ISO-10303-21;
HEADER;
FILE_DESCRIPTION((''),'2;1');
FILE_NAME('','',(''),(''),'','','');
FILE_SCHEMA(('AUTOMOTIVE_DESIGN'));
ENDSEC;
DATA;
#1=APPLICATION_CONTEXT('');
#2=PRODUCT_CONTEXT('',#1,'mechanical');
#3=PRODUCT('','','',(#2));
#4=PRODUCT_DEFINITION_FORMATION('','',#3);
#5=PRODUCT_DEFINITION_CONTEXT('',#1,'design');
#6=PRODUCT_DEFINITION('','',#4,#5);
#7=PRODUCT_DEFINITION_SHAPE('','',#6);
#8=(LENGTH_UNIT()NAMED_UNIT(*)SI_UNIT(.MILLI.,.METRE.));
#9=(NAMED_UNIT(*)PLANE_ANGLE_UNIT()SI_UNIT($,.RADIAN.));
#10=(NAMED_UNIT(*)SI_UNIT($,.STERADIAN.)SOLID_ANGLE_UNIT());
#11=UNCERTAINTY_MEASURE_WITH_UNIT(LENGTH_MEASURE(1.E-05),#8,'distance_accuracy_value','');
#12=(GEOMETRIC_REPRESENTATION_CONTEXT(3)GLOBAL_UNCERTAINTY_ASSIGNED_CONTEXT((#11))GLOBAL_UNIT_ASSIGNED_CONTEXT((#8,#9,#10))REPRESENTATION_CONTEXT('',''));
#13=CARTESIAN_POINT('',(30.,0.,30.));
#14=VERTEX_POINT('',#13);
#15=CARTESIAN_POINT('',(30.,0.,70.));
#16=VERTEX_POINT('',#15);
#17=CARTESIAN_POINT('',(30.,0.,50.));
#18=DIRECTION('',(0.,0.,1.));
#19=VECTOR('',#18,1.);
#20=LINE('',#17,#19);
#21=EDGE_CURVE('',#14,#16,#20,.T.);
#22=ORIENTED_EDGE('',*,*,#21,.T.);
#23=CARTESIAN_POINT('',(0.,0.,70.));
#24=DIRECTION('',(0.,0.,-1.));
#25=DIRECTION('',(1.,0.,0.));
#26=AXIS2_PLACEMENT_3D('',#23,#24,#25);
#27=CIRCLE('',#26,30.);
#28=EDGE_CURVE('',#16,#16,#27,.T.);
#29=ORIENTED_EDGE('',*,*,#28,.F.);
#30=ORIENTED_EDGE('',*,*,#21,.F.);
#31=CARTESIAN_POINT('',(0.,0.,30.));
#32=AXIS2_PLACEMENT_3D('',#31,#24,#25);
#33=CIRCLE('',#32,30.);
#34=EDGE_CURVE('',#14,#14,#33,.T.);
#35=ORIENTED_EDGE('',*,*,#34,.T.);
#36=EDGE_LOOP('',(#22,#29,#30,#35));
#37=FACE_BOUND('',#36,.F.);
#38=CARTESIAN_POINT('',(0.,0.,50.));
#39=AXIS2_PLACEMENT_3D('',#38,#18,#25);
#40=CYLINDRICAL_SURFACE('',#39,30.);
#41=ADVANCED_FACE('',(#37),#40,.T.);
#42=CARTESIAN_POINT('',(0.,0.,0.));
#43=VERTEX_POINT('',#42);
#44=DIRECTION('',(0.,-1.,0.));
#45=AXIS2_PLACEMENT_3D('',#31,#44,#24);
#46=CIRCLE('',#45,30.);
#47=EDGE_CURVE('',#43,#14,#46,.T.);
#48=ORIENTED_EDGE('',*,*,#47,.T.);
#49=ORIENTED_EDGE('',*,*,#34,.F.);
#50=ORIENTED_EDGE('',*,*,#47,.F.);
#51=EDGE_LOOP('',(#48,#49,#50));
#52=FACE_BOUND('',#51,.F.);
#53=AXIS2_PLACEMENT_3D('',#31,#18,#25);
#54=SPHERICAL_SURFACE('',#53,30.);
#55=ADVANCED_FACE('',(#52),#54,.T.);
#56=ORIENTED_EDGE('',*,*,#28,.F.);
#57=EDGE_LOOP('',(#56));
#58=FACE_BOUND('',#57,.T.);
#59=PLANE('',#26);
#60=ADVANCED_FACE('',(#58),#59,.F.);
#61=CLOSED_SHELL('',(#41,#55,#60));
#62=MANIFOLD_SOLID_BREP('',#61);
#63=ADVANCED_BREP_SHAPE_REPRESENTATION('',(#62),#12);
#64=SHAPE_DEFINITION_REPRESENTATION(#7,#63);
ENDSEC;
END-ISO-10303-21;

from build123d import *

# Parameters (mm, degrees)
F0_W = 30
F0_H = 40


# Not quite as in the source:
# - a feature names something its author has since deleted; it is built from what else it names


with BuildPart() as f1:
    # F0 (on Front) → F1 (revolve)
    with BuildSketch(Plane.XZ):
        with Locations((15, 50)):
            Rectangle(F0_W, F0_H)
        with BuildLine():
            Line((30, 30), (0, 30))
            Line((0, 30), (0, 0))
            ThreePointArc((0, 0), (21.2132034356, 8.7867965644), (30, 30))
        make_face()
    revolve(axis=Axis((0, 0, 50), (0, 0, -1)))


solid = f1.part
